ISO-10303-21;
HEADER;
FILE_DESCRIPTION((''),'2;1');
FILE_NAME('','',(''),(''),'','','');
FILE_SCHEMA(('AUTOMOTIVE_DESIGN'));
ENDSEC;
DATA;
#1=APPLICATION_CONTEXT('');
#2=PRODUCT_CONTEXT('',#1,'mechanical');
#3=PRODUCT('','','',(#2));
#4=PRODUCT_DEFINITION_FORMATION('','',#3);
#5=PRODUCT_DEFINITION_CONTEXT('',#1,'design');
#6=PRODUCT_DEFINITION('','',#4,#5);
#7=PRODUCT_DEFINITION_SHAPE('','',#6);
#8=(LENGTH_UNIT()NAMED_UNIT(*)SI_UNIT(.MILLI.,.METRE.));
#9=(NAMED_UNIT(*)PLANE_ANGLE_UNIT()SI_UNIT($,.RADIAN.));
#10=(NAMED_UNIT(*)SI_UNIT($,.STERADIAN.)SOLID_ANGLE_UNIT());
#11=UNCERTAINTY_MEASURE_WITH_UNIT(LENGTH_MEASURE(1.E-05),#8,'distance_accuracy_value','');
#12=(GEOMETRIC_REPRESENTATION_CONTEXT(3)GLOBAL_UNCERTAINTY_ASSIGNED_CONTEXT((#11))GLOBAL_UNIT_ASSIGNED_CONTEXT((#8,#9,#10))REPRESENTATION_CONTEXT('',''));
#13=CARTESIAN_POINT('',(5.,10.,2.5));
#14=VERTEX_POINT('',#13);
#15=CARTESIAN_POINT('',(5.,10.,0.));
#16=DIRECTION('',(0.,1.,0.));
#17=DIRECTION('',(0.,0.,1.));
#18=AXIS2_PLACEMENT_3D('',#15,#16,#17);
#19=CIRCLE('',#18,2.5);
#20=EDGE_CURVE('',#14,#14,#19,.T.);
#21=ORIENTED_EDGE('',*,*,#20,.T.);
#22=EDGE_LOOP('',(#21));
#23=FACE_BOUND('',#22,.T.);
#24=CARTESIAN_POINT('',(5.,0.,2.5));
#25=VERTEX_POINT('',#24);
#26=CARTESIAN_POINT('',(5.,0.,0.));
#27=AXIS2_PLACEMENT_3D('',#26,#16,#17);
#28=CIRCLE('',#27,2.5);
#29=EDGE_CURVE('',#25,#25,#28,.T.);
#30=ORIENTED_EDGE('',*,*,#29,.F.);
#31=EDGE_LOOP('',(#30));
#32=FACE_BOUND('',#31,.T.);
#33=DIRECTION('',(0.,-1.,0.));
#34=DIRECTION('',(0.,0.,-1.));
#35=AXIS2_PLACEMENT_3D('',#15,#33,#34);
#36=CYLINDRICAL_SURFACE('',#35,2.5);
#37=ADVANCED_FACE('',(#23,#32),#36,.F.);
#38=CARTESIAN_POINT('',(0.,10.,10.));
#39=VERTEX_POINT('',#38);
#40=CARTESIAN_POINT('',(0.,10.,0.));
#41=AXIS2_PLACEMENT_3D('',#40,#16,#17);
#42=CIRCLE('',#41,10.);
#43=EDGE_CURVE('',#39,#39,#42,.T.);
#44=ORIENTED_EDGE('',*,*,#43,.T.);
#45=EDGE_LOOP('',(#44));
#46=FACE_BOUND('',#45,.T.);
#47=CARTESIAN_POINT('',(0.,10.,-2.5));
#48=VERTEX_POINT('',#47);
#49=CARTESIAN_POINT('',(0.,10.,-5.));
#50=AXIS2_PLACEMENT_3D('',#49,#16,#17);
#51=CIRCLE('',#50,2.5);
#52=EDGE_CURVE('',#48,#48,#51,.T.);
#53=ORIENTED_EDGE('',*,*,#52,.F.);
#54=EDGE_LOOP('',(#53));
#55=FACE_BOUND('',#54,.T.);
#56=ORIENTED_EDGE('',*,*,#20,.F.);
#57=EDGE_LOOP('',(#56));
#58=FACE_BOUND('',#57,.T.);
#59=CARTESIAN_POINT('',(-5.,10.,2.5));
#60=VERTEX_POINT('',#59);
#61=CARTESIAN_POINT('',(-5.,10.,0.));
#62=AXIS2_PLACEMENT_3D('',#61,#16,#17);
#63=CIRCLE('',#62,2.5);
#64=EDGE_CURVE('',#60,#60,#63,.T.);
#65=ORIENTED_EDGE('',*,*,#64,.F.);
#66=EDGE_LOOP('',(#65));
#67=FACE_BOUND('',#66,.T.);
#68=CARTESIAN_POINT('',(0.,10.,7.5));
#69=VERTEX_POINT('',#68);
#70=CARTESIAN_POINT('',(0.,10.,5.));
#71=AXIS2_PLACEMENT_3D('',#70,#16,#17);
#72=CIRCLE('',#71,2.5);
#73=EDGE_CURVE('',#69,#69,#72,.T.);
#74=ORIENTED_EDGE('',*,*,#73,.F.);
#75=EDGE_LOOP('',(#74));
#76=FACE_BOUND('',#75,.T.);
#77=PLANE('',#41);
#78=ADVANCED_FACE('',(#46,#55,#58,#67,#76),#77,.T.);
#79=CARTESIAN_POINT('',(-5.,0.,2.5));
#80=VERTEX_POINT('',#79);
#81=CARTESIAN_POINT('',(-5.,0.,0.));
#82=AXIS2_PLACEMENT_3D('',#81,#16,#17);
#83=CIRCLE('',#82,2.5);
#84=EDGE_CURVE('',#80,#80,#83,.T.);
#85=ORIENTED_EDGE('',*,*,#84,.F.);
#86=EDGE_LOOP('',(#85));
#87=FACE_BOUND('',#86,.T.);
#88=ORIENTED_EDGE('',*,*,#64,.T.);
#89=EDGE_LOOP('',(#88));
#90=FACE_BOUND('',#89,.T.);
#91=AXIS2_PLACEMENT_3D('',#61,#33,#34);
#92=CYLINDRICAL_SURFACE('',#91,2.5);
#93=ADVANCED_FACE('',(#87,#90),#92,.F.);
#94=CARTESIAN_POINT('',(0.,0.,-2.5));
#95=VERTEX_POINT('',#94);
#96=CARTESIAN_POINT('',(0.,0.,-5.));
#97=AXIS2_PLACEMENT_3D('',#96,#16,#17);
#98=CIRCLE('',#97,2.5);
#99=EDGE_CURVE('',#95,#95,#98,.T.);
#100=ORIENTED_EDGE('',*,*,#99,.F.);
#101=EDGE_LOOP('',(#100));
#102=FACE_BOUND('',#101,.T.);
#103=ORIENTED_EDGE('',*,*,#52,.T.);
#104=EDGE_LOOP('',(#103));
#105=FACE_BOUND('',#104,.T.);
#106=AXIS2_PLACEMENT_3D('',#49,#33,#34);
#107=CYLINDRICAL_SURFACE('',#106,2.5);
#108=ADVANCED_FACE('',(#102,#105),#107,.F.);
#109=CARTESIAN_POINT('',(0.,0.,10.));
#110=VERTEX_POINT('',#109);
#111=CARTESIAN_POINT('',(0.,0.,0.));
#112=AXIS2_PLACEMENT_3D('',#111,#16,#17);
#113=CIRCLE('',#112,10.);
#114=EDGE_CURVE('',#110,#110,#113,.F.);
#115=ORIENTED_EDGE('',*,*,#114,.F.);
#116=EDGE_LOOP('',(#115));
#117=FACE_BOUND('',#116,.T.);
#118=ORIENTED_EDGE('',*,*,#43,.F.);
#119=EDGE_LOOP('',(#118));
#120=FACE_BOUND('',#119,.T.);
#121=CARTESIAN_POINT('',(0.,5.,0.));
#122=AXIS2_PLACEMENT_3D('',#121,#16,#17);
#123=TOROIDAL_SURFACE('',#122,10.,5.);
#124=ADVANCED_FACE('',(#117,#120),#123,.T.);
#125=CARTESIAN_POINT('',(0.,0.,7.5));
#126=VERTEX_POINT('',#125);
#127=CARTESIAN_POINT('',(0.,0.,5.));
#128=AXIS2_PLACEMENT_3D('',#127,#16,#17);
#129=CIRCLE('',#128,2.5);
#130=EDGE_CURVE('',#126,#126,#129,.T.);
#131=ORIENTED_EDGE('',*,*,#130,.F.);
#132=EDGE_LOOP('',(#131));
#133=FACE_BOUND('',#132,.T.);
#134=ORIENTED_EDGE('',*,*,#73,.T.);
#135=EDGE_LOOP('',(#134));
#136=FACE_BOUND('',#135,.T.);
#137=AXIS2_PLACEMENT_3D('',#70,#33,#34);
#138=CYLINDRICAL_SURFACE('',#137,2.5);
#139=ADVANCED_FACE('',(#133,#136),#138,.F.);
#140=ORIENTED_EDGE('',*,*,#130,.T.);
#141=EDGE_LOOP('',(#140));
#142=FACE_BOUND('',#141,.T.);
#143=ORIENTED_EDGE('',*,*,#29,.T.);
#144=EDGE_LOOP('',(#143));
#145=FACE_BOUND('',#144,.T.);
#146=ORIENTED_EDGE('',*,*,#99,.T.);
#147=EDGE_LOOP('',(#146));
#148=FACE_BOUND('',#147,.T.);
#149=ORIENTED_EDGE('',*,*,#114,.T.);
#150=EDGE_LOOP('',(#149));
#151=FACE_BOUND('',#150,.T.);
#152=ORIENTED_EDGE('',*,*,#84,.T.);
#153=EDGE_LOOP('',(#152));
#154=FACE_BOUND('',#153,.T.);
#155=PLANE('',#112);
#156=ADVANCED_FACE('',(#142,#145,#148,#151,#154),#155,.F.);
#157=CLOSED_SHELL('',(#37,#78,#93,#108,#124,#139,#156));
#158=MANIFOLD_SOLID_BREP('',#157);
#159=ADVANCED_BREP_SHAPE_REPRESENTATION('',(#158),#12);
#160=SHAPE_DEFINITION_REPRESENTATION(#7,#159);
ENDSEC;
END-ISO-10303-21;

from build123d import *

# Parameters (mm, degrees)
SKETCH_1_R      = 15
SKETCH_1_R_2    = 2.5
EXTRUDE_1_DEPTH = 10
FILLET_1_R      = 5


with BuildPart() as part:
    # 草图1 → 凸台-拉伸1 (new body)
    with BuildSketch(Plane(origin=(0, 0, 0), x_dir=(1, 0, 0), z_dir=(0, 1, 0))):
        with Locations(Location((0, 0, 0), (0, 0, 270))):
            Circle(SKETCH_1_R)
        with Locations(Location((0, 5, 0), (0, 0, 270))):
            Circle(SKETCH_1_R_2, mode=Mode.SUBTRACT)
        with Locations(Location((0, -5, 0), (0, 0, 270))):
            Circle(SKETCH_1_R_2, mode=Mode.SUBTRACT)
        with Locations(Location((5, 0, 0), (0, 0, 270))):
            Circle(SKETCH_1_R_2, mode=Mode.SUBTRACT)
        with Locations(Location((-5, 0, 0), (0, 0, 270))):
            Circle(SKETCH_1_R_2, mode=Mode.SUBTRACT)
    extrude(amount=EXTRUDE_1_DEPTH)

    # 圆角1
    fillet_1_edges = [part.edges().sort_by_distance(p)[0] for p in [
        (0, 0, -15),
        (0, 10, -15),
    ]]
    fillet(fillet_1_edges, radius=FILLET_1_R - 0.0001)  # a hair under: the kernel refuses the full size


solid = part.part
